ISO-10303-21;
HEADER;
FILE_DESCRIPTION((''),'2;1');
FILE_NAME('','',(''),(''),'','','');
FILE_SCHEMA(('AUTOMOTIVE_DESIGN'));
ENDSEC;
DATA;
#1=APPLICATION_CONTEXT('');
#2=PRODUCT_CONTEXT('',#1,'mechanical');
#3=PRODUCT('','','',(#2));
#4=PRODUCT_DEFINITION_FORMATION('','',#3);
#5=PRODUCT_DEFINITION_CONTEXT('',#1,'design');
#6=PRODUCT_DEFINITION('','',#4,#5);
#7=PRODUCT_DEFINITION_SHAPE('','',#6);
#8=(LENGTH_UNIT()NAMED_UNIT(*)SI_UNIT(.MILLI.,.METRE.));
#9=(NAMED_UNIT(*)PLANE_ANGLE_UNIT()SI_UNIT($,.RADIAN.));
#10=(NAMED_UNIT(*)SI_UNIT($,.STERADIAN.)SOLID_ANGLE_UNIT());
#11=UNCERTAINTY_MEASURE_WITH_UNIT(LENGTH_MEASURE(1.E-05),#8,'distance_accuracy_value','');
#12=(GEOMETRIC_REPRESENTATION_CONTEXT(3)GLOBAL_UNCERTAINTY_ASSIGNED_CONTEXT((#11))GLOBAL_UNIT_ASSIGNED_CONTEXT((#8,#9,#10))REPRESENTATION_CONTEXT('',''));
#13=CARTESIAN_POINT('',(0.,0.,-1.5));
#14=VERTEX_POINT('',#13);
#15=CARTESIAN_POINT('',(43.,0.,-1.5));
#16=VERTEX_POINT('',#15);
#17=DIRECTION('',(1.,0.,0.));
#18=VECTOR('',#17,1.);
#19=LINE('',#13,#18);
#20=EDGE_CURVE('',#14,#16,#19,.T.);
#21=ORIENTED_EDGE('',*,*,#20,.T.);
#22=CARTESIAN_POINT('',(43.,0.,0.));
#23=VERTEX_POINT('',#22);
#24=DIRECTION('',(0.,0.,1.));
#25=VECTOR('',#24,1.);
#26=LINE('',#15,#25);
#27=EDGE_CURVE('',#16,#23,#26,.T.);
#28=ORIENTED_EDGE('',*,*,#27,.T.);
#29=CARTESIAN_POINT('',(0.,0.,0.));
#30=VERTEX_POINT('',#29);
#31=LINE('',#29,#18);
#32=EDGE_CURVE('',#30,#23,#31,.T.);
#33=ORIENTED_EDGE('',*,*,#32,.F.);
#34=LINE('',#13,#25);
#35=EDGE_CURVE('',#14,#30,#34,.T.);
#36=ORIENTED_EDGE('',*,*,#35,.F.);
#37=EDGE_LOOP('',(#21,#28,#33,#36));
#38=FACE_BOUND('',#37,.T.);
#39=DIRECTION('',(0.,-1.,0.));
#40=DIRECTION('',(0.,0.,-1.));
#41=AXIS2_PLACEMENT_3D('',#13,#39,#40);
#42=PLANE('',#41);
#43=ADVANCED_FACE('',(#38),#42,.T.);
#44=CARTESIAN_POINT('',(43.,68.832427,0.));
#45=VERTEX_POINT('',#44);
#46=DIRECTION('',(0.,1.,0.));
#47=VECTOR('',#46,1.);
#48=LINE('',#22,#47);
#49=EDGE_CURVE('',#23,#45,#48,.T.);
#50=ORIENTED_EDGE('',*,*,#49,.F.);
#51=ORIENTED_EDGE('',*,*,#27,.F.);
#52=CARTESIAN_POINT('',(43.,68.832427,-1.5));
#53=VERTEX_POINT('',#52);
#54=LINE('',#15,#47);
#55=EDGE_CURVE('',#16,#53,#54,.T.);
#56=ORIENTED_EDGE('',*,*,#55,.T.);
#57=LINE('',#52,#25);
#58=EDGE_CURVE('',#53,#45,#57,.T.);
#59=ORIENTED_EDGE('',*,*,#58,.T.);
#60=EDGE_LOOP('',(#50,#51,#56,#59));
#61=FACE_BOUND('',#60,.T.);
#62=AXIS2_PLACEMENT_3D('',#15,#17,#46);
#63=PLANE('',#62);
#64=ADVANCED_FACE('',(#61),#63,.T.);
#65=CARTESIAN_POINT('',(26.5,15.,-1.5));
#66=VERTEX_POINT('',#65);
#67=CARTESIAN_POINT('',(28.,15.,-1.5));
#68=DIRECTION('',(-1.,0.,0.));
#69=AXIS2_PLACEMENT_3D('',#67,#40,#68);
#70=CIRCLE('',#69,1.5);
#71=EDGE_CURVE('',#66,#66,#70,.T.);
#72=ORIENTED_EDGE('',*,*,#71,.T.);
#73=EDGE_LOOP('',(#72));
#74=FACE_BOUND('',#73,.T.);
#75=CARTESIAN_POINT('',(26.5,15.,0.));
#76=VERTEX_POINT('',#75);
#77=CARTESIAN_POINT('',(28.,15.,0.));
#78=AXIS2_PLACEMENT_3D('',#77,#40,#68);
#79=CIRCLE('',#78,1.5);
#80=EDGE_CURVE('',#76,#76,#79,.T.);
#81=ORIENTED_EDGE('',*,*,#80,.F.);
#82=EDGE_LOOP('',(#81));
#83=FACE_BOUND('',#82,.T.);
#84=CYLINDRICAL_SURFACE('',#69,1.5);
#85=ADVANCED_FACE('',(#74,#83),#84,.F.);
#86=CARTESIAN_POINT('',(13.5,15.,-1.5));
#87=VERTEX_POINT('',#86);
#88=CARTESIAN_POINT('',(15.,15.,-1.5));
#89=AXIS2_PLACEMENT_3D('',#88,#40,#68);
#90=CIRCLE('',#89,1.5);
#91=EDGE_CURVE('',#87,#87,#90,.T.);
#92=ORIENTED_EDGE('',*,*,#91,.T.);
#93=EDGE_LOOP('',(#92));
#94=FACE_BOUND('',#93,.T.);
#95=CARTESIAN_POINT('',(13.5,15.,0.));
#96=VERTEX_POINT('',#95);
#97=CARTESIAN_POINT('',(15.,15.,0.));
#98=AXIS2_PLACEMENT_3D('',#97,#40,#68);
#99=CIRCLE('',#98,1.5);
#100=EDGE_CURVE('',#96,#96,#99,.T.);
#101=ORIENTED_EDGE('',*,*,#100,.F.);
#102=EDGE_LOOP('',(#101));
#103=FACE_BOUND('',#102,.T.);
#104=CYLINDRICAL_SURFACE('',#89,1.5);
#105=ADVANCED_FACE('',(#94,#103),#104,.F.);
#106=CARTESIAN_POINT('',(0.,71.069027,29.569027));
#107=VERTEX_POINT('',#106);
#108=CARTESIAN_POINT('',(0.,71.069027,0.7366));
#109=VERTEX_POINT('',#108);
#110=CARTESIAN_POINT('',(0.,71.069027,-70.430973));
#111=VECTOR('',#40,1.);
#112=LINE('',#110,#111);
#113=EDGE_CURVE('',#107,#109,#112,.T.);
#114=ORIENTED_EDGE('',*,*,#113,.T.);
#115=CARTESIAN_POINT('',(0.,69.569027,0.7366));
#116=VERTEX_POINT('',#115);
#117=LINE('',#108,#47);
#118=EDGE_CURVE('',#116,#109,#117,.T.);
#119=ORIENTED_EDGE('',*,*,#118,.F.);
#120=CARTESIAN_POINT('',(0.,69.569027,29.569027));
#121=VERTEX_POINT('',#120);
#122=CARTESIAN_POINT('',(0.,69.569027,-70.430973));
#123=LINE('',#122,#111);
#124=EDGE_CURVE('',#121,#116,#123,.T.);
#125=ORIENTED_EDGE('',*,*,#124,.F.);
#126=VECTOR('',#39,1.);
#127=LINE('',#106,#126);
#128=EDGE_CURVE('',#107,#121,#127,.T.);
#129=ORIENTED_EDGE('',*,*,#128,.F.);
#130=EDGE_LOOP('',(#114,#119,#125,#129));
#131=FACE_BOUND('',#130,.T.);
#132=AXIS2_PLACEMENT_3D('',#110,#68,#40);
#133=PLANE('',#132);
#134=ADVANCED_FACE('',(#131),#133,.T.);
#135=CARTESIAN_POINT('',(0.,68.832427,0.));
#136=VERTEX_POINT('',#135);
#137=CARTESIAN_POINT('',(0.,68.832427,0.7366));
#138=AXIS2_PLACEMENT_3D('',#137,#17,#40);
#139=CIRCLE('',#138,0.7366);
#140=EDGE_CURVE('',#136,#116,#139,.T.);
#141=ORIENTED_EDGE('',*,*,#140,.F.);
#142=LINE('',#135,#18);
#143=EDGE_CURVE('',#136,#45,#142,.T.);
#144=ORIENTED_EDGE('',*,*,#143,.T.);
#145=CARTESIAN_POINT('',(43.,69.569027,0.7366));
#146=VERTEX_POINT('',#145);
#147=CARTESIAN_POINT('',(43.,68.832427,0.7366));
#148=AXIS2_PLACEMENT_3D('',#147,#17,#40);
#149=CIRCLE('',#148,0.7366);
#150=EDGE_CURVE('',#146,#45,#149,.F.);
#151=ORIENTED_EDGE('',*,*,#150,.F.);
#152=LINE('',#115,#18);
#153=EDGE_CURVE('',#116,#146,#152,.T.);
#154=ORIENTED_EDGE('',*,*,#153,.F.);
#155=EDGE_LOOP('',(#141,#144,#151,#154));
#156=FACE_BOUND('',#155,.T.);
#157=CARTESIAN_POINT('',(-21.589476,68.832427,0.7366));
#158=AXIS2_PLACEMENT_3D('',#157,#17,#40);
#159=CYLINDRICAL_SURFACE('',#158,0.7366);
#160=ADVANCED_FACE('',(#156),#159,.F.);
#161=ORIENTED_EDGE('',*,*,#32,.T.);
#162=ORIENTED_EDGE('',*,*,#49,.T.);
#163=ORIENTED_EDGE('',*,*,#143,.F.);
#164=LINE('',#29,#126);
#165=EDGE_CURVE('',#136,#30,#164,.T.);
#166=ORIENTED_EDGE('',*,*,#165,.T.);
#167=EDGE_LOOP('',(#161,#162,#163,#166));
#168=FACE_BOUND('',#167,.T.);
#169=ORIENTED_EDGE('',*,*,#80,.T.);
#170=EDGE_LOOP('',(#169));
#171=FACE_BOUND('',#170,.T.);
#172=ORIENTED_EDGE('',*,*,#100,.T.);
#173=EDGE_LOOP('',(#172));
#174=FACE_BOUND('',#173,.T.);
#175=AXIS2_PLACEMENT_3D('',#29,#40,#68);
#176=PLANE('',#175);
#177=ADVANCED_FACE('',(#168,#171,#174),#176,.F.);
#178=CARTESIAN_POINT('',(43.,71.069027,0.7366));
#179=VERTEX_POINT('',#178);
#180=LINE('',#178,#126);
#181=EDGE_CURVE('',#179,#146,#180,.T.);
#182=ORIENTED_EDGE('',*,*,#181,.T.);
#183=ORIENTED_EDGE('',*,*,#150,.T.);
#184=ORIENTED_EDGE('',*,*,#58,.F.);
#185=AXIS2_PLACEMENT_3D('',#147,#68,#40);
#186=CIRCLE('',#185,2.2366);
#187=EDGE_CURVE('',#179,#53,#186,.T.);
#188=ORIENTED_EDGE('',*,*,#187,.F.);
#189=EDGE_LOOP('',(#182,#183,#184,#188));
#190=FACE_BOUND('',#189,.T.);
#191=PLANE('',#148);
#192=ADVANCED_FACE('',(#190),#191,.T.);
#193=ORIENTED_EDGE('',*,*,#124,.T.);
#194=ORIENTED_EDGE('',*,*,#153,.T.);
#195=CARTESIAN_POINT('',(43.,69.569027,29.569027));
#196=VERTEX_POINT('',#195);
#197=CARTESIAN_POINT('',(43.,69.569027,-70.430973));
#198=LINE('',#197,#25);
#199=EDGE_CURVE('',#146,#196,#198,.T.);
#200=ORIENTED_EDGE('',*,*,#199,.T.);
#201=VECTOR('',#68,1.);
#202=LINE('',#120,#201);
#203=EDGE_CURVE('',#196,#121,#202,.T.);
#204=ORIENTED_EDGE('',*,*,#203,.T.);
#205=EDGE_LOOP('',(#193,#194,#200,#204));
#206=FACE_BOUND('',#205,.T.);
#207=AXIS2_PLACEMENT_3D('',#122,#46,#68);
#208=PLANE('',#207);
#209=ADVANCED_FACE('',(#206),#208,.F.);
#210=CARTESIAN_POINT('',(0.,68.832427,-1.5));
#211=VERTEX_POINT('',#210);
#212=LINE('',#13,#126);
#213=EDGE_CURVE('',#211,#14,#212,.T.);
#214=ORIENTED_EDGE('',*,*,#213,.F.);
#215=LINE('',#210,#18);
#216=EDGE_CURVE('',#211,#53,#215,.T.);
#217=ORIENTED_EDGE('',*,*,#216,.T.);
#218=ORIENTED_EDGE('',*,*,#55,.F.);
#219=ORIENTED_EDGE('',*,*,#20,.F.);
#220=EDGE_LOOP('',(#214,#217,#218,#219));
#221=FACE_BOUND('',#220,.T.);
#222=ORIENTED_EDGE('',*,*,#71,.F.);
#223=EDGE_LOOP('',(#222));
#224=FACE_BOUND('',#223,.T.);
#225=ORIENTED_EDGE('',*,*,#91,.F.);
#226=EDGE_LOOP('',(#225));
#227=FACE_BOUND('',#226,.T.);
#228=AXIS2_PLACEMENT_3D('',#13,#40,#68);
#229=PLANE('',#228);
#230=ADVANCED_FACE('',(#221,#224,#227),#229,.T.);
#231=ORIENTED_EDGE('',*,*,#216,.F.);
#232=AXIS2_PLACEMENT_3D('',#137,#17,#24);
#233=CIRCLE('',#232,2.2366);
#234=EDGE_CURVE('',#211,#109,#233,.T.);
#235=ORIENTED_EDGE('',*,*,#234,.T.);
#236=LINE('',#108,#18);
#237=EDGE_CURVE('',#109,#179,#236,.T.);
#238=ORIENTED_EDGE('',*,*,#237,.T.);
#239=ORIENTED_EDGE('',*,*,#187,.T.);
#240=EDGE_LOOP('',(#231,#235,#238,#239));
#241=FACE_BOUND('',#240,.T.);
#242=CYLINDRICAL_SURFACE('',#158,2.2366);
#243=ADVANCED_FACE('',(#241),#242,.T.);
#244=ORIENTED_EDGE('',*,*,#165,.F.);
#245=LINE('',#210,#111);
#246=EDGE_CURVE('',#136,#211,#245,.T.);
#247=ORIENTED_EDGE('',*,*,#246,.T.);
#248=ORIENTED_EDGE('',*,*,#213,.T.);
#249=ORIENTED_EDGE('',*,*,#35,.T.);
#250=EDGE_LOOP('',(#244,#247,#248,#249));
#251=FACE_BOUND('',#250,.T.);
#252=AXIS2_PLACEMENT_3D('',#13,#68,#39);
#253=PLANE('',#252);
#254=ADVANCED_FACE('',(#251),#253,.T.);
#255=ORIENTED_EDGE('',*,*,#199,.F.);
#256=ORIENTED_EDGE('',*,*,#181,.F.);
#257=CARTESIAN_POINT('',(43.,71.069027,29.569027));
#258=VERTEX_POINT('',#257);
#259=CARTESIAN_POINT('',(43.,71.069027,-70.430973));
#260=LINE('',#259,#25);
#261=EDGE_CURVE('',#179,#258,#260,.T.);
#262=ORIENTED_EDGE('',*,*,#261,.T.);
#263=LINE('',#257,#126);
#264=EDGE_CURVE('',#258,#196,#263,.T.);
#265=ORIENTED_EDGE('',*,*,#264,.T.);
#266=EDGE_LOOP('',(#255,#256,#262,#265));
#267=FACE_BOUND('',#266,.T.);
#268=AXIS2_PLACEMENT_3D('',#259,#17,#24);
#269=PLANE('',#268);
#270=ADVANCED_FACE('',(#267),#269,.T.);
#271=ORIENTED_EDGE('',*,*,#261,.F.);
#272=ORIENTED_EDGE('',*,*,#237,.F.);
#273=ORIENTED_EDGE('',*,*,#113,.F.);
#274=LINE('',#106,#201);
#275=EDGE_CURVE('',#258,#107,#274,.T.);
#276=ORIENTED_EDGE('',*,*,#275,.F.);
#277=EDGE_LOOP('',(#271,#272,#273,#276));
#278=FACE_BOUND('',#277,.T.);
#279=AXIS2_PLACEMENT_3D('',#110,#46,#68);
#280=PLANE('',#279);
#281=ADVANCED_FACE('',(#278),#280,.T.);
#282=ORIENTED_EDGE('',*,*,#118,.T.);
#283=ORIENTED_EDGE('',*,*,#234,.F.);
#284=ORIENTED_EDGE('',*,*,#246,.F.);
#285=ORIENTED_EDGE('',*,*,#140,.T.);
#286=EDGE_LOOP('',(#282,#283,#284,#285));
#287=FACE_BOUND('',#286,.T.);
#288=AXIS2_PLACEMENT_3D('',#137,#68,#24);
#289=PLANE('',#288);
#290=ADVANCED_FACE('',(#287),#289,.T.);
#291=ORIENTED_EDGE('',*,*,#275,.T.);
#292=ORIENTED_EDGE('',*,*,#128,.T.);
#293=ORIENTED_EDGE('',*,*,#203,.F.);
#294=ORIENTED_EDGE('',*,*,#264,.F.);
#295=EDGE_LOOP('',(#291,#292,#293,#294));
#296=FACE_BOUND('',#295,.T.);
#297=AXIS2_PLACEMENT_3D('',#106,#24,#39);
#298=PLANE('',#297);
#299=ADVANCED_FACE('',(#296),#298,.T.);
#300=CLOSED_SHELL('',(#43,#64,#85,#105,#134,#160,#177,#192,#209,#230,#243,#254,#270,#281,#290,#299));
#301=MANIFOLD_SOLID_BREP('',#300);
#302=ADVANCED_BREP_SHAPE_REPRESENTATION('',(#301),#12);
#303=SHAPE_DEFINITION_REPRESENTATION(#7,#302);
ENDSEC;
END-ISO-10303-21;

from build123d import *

# Parameters (mm, degrees)
SKETCH1_W              = 43
SKETCH1_H              = 100
BASE_FLANGE1_DEPTH     = 1.5
SKETCHED_BEND1_DEPTH   = 43
SKETCHED_BEND1_2_DEPTH = 43
F_3_0MM_DOWEL_HOLE1_D  = 3


# Read off the part's stored shape, not the designer's step: Sketched Bend1
# Sheet-metal steps are written as plain solids
with BuildPart() as part:
    # Sketch1 → Base-Flange1 (new body)
    with BuildSketch(Plane.XY):
        with Locations((21.5, 50)):
            Rectangle(SKETCH1_W, SKETCH1_H)
    extrude(amount=-BASE_FLANGE1_DEPTH)

    # Sketched Bend1 outline → Sketched Bend1 (cut)
    with BuildSketch(Plane.YZ):
        with BuildLine():
            Line((100, 0), (70.944250946, 0))
            ThreePointArc((70.944250946, 0), (70.127591172, -1.086838938), (68.83242709, -1.5))
            Line((68.83242709, -1.5), (100, -1.5))
            Line((100, -1.5), (100, 0))
        make_face()
    extrude(amount=SKETCHED_BEND1_DEPTH, mode=Mode.SUBTRACT)

    # Sketched Bend1 2 outline → Sketched Bend1 2 (add)
    with BuildSketch(Plane.YZ):
        with BuildLine():
            Line((69.56902709, 29.56902709), (69.56902709, 0.7366))
            ThreePointArc((69.56902709, 0.7366), (69.353281945, 0.215745145), (68.83242709, 0))
            Line((68.83242709, 0), (70.944250946, 0))
            ThreePointArc((70.944250946, 0), (71.037612433, 0.363053267), (71.06902709, 0.7366))
            Line((71.06902709, 0.7366), (71.06902709, 29.56902709))
            Line((71.06902709, 29.56902709), (69.56902709, 29.56902709))
        make_face()
    extrude(amount=SKETCHED_BEND1_2_DEPTH)

    # Ø3.0mm Dowel Hole1 (through all)
    with Locations(Plane(origin=(-21.797673733, -43.188016106, -1.5), x_dir=(-0.9396926207859104, 0.34202014332566333, 0), z_dir=(0, 0, -1))):
        with Locations((-26.893032931, 71.71065686), (-14.67702886, 67.264394997)):
            Hole(F_3_0MM_DOWEL_HOLE1_D / 2)


solid = part.part
